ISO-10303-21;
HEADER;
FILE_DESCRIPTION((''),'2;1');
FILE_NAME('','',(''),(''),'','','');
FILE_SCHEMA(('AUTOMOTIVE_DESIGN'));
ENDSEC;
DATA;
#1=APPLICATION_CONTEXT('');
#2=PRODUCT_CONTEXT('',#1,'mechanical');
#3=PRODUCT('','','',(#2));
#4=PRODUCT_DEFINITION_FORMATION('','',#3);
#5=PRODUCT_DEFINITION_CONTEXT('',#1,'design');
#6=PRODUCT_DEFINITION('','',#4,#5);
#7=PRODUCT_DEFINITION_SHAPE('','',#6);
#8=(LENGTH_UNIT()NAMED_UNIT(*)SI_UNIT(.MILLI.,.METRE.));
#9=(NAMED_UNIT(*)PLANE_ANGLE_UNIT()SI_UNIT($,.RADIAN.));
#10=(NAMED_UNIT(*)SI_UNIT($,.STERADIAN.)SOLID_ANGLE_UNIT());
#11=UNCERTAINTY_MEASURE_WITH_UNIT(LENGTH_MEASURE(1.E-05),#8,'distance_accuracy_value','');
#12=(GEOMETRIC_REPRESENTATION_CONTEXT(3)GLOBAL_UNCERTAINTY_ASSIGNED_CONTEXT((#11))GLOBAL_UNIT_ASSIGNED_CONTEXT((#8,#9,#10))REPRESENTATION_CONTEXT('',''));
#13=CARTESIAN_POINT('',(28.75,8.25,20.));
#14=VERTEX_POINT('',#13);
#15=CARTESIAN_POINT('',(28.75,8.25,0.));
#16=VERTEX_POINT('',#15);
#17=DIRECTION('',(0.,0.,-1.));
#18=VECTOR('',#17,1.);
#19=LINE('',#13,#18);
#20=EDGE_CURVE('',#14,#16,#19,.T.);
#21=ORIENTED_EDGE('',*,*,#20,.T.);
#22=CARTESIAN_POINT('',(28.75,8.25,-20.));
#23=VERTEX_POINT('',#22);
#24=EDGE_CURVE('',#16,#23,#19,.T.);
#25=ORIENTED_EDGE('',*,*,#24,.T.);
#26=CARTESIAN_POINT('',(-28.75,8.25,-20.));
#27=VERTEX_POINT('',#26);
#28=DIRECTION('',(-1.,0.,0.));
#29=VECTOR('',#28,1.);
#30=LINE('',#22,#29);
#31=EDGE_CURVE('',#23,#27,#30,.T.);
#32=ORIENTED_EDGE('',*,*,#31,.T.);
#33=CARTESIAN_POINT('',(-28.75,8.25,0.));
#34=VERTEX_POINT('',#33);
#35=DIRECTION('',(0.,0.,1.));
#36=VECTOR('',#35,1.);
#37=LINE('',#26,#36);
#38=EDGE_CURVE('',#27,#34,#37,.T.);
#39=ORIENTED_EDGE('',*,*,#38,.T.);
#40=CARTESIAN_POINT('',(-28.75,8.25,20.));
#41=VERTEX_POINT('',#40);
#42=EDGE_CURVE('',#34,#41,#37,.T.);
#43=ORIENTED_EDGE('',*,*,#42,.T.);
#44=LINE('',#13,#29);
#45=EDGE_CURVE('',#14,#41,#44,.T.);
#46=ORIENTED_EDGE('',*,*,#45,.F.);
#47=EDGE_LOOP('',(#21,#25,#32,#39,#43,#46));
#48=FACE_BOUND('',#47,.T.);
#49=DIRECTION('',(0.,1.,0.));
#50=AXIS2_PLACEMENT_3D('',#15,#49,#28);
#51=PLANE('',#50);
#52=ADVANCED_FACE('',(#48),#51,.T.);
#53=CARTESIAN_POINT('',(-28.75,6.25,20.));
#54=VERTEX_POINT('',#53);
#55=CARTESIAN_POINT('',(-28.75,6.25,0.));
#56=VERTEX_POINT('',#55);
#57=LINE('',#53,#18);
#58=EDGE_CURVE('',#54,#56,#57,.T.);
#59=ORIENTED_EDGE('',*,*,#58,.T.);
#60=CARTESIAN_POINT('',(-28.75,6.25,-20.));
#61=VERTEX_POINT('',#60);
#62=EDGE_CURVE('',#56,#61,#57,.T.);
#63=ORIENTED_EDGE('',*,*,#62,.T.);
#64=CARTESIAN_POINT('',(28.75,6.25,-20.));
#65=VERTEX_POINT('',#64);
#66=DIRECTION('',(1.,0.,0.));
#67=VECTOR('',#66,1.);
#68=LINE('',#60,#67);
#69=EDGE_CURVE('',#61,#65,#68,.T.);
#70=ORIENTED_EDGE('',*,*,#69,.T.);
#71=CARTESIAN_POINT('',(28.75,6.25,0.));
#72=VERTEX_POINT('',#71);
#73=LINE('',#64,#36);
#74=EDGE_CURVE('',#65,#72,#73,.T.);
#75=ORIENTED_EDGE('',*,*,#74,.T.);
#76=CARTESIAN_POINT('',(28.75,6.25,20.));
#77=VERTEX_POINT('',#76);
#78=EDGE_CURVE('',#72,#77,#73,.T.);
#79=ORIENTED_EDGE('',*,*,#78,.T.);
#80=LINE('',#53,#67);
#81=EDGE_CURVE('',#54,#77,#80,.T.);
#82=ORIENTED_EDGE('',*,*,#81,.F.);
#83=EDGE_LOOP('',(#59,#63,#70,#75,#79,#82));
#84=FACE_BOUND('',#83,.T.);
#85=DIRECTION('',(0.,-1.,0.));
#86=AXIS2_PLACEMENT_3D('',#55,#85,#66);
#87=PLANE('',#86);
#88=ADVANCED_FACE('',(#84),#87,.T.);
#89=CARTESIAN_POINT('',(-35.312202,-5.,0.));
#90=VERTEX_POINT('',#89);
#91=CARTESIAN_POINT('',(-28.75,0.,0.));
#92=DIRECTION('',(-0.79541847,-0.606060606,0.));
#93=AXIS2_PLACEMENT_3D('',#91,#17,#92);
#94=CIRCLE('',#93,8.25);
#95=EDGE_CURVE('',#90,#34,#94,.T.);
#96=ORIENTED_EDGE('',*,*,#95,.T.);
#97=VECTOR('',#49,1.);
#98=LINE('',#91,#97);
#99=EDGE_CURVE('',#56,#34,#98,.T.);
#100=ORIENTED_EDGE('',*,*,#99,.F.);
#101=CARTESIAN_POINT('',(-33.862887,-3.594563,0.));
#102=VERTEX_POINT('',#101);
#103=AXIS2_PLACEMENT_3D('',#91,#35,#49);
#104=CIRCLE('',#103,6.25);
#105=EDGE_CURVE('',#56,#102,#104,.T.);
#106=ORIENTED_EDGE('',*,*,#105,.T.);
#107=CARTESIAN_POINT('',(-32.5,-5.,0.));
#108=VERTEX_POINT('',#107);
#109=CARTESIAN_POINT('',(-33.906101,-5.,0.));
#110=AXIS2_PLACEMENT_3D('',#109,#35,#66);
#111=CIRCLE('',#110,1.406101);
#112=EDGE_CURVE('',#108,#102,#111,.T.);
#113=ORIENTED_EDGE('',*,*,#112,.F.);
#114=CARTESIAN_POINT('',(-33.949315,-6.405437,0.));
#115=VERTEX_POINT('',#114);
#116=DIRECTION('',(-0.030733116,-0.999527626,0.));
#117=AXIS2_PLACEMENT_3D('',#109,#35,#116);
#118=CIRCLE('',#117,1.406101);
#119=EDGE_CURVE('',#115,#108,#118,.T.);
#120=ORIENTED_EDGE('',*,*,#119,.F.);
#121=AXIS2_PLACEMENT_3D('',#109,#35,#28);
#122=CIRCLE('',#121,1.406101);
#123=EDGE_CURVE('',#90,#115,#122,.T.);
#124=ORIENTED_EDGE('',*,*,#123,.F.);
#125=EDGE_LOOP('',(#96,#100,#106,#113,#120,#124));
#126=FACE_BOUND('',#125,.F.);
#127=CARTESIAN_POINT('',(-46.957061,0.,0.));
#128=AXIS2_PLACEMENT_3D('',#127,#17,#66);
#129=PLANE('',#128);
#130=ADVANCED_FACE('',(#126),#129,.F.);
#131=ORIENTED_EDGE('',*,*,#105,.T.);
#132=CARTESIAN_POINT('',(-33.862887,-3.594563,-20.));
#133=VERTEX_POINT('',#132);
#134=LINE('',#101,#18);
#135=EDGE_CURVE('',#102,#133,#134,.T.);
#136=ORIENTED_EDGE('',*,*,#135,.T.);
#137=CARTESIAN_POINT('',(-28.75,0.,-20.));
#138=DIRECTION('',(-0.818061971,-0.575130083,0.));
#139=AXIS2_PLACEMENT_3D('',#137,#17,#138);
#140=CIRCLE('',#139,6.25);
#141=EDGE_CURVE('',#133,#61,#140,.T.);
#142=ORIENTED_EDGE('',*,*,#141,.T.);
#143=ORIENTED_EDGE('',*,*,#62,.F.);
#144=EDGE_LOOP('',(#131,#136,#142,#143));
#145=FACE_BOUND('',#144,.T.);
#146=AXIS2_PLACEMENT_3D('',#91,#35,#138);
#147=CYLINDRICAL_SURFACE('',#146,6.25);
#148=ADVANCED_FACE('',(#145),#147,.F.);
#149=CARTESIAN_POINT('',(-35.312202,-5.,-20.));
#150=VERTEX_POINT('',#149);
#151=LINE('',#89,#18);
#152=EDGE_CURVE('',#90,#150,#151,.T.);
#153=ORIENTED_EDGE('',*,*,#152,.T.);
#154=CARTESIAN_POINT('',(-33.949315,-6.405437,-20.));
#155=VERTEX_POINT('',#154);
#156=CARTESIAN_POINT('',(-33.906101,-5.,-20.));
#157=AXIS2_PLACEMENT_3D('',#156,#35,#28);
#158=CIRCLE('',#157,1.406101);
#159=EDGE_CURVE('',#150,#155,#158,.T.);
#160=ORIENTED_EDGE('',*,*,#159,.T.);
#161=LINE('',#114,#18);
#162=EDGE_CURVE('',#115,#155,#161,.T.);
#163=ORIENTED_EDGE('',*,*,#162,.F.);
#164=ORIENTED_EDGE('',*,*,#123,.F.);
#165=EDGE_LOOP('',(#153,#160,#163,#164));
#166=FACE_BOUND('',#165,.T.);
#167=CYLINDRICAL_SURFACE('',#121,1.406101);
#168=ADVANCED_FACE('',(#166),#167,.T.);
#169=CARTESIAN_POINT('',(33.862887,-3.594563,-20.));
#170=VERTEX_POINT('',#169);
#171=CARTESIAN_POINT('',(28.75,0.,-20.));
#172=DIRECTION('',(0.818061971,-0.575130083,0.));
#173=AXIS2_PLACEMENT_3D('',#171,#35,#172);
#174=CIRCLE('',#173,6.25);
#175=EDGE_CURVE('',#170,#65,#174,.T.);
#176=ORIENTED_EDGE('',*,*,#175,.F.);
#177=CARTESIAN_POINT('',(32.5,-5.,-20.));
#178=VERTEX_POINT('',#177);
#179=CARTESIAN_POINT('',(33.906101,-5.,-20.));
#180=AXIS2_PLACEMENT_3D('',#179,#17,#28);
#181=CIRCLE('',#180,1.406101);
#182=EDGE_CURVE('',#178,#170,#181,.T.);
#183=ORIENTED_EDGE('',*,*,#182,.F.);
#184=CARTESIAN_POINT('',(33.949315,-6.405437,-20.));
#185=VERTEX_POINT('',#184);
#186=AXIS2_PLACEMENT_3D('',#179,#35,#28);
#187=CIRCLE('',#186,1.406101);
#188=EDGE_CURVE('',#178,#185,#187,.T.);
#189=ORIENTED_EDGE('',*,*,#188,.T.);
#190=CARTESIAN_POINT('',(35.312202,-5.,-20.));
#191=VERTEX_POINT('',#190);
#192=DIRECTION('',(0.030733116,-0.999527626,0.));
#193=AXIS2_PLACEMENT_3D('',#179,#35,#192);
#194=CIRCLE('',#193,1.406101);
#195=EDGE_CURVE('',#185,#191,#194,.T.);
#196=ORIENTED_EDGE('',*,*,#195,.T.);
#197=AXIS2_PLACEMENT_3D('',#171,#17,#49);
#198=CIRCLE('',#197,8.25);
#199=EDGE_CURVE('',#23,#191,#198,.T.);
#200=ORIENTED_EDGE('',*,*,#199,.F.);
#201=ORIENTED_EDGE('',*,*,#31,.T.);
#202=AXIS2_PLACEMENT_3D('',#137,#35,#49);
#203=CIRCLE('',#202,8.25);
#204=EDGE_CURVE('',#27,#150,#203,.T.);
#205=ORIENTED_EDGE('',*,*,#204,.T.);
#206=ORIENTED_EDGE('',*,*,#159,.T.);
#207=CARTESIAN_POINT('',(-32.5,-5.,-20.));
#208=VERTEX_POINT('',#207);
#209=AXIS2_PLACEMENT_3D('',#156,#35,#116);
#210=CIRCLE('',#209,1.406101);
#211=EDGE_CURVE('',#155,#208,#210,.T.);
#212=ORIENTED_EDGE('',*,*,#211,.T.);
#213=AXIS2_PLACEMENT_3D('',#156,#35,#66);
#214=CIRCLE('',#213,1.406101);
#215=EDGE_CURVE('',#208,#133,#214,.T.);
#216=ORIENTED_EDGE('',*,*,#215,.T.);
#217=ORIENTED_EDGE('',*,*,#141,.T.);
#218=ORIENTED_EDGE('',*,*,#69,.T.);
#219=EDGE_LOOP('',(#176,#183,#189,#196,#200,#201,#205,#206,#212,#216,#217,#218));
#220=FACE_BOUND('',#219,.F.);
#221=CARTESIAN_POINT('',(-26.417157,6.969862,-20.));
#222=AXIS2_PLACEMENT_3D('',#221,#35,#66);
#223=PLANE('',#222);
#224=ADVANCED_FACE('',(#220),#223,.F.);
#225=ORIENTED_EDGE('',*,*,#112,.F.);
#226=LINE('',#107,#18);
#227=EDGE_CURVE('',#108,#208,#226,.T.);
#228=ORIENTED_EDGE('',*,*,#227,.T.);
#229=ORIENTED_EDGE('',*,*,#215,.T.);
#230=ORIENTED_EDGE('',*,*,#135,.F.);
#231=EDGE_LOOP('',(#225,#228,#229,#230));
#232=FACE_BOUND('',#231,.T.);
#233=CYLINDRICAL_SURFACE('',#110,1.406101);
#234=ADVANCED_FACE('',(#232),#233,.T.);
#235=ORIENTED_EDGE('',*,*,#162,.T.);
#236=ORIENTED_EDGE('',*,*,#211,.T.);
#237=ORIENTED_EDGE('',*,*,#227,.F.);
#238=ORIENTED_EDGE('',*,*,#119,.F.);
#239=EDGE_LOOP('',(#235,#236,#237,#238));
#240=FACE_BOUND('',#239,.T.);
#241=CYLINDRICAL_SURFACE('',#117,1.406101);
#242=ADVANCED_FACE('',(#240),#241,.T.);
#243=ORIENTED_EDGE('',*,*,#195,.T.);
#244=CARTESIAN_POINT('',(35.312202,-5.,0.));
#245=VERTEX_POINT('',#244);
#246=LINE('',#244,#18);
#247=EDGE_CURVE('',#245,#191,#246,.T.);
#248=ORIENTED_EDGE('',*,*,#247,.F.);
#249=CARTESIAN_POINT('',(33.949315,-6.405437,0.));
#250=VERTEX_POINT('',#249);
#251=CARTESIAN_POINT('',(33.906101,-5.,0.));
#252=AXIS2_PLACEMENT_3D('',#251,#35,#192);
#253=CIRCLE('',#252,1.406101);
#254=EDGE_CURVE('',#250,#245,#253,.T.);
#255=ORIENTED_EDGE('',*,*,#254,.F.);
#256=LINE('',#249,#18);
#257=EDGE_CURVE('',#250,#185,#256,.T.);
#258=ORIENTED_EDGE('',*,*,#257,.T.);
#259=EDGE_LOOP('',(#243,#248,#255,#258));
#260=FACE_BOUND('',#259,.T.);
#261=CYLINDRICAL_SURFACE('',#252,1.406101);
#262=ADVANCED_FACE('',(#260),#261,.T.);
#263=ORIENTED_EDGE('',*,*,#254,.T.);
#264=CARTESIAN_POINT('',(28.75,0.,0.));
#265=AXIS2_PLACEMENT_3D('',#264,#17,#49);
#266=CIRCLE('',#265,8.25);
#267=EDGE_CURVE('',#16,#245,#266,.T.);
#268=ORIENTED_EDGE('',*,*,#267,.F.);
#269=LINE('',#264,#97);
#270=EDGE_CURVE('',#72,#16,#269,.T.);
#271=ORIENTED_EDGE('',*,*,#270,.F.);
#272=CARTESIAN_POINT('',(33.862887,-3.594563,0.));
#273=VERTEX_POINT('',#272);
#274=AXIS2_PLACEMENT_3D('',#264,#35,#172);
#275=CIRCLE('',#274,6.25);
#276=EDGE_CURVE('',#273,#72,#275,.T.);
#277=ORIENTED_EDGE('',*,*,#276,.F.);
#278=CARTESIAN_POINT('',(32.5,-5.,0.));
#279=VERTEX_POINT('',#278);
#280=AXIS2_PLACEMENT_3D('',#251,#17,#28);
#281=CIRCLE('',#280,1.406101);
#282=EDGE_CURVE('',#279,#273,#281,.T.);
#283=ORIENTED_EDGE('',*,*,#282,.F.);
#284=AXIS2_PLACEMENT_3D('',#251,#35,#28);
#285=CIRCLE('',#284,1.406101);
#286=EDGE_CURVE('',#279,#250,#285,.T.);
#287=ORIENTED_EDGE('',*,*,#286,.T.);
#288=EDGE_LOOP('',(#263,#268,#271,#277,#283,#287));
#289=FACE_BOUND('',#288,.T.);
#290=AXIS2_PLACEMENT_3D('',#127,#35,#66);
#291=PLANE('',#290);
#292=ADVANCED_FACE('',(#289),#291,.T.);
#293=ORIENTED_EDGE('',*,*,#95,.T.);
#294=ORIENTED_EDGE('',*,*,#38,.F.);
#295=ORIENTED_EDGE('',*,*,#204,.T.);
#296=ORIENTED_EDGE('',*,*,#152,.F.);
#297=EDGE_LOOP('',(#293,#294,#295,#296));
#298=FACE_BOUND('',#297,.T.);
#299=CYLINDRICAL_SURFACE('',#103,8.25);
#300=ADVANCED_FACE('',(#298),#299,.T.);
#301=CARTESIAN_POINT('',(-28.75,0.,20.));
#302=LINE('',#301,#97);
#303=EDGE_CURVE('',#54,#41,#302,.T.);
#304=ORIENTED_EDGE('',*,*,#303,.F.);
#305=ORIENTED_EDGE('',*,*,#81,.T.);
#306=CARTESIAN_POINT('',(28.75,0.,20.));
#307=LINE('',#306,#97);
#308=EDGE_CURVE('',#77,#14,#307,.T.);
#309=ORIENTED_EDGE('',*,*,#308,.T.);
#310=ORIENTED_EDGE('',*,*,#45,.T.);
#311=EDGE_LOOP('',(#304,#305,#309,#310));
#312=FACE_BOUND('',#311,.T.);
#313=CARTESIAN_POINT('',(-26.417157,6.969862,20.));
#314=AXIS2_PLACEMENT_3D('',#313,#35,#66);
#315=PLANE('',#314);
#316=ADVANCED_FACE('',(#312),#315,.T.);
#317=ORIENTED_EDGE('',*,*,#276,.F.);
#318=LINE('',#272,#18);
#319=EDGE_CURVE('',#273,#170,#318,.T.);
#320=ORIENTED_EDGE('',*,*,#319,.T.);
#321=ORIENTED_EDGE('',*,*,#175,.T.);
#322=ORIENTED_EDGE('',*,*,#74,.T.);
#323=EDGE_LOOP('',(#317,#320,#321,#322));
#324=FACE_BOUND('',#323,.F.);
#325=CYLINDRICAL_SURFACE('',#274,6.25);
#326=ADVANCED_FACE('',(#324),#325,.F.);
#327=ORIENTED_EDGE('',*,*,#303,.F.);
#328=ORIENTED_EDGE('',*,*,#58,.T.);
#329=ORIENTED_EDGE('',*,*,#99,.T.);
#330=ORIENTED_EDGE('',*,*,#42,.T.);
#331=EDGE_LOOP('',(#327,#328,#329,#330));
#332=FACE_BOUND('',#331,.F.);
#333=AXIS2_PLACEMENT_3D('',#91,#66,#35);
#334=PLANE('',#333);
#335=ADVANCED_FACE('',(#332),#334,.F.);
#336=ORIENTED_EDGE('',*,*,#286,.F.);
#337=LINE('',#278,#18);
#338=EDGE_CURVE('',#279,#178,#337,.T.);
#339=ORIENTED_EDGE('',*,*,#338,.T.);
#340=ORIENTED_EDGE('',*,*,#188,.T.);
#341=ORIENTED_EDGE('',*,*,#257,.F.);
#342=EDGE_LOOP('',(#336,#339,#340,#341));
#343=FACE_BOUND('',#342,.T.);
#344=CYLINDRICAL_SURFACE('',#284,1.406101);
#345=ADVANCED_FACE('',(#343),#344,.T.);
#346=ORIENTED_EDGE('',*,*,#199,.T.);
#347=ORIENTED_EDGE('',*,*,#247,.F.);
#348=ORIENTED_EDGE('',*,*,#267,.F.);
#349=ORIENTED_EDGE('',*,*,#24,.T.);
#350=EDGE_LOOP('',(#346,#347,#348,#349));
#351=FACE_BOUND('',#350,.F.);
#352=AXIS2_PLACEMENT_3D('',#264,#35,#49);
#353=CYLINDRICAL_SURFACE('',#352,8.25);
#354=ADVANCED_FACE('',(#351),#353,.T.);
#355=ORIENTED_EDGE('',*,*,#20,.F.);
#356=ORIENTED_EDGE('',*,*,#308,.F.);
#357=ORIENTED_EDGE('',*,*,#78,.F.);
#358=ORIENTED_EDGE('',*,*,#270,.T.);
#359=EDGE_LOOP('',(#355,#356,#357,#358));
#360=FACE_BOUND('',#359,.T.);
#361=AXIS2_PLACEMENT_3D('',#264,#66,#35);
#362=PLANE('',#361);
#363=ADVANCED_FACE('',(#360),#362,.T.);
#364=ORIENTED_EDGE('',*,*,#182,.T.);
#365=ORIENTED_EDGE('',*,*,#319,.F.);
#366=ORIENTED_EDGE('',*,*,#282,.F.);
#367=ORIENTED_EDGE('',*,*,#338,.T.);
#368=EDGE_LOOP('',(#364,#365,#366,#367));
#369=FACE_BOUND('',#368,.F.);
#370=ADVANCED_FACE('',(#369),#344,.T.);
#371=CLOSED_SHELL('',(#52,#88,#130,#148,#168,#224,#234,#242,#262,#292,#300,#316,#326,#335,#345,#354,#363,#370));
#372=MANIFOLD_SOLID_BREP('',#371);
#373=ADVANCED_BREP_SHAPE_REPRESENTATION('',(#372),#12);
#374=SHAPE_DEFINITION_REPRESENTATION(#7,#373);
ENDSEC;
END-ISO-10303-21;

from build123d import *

# Parameters (mm, degrees)
F1_DEPTH = 20
F2_W     = 18.2070606947
F2_H     = 20
F2_W_2   = 57.5
F2_W_3   = 18.4121565521
F3_DEPTH = 25
F4_DEPTH = 25


# Not quite as in the source:
# - a pattern or mirror of a feature is missing from the dataset's text; its kind, count and spacing are read off the source's solid


with BuildPart() as f1:
    # F0 (on Top) → F1 (new body, symmetric)
    with BuildSketch(Plane.XY):
        with BuildLine():
            Line((-28.75, 8.25), (-28.75, 6.25))
            Line((-28.75, 6.25), (-23.3648351929, 6.25))
            ThreePointArc((-23.3648351929, 6.25), (-25.8777186767, 7.7338541491), (-28.75, 8.25))
        make_face()
        with BuildLine():
            ThreePointArc((-33.8628873162, -3.5945630182), (-34.2965538339, 2.8806666881), (-28.75, 6.25))
            Line((-28.75, 6.25), (-28.75, 8.25))
            ThreePointArc((-28.75, 8.25), (-36.1429865413, 3.661454629), (-35.3122023742, -5))
            ThreePointArc((-35.3122023742, -5), (-34.8849672334, -3.9905735233), (-33.8628873162, -3.5945630182))
        make_face()
        with BuildLine():
            ThreePointArc((-28.75, 8.25), (-25.8777186767, 7.7338541491), (-23.3648351929, 6.25))
            Line((-23.3648351929, 6.25), (23.3648351929, 6.25))
            ThreePointArc((23.3648351929, 6.25), (25.8777186767, 7.7338541491), (28.75, 8.25))
            Line((28.75, 8.25), (-28.75, 8.25))
        make_face()
        with BuildLine():
            ThreePointArc((-32.5, -5), (-32.8966747104, -4.0211339537), (-33.8628873162, -3.5945630182))
            ThreePointArc((-33.8628873162, -3.5945630182), (-33.2368147022, -4.3509761925), (-32.5, -5))
        make_face()
        with BuildLine():
            ThreePointArc((-32.5, -5), (-33.2368147022, -4.3509761925), (-33.8628873162, -3.5945630182))
            ThreePointArc((-33.8628873162, -3.5945630182), (-34.8849672334, -3.9905735233), (-35.3122023742, -5))
            Line((-35.3122023742, -5), (-32.5, -5))
        make_face()
        with BuildLine():
            ThreePointArc((28.75, 8.25), (25.8777186767, 7.7338541491), (23.3648351929, 6.25))
            Line((23.3648351929, 6.25), (28.75, 6.25))
            Line((28.75, 6.25), (28.75, 8.25))
        make_face()
        with BuildLine():
            ThreePointArc((-33.949315058, -6.4054369818), (-32.9272351408, -6.0094264767), (-32.5, -5))
            Line((-32.5, -5), (-35.3122023742, -5))
            ThreePointArc((-35.3122023742, -5), (-34.672595407, -5.7432885741), (-33.949315058, -6.4054369818))
        make_face()
        with BuildLine():
            ThreePointArc((-33.949315058, -6.4054369818), (-34.672595407, -5.7432885741), (-35.3122023742, -5))
            ThreePointArc((-35.3122023742, -5), (-34.9155276638, -5.9788660463), (-33.949315058, -6.4054369818))
        make_face()
    extrude(amount=F1_DEPTH, both=True)



with BuildPart() as f1b:
    # F0 (on Top) → F1, piece 2 (new body, symmetric)
    with BuildSketch(Plane.XY):
        with BuildLine():
            ThreePointArc((33.949315058, -6.4054369818), (34.9155276638, -5.9788660463), (35.3122023742, -5))
            ThreePointArc((35.3122023742, -5), (34.672595407, -5.7432885741), (33.949315058, -6.4054369818))
        make_face()
        with BuildLine():
            ThreePointArc((33.949315058, -6.4054369818), (34.672595407, -5.7432885741), (35.3122023742, -5))
            Line((35.3122023742, -5), (32.5, -5))
            ThreePointArc((32.5, -5), (32.9272351408, -6.0094264767), (33.949315058, -6.4054369818))
        make_face()
        with BuildLine():
            Line((32.5, -5), (35.3122023742, -5))
            ThreePointArc((35.3122023742, -5), (34.8849672334, -3.9905735233), (33.8628873162, -3.5945630182))
            ThreePointArc((33.8628873162, -3.5945630182), (33.2368147022, -4.3509761925), (32.5, -5))
        make_face()
    extrude(amount=F1_DEPTH, both=True)


with BuildPart() as f1_1:
    add(f1.part)

    add(f1b.part)  # F1_copies merges F1b
    # F1_copies: F1 across plane
    add(f1.part.mirror(Plane(origin=(0, 0, 0), x_dir=(0, 0, 1), z_dir=(1, 0, 0))))

    # F2 (on Front) → F3 (cut)
    with BuildSketch(Plane.XZ):
        with Locations((-37.8535303473, 10)):
            Rectangle(F2_W, F2_H)
        with Locations((0, 10)):
            Rectangle(F2_W_2, F2_H)
        with Locations((37.956078276, 10)):
            Rectangle(F2_W_3, F2_H)
    extrude(amount=F3_DEPTH, mode=Mode.SUBTRACT)

    # F2 (on Front) → F4 (cut)
    with BuildSketch(Plane.XZ):
        with Locations((-37.8535303473, 10)):
            Rectangle(F2_W, F2_H)
        with Locations((37.956078276, 10)):
            Rectangle(F2_W_3, F2_H)
    extrude(amount=-F4_DEPTH, mode=Mode.SUBTRACT)


solid = f1_1.part
